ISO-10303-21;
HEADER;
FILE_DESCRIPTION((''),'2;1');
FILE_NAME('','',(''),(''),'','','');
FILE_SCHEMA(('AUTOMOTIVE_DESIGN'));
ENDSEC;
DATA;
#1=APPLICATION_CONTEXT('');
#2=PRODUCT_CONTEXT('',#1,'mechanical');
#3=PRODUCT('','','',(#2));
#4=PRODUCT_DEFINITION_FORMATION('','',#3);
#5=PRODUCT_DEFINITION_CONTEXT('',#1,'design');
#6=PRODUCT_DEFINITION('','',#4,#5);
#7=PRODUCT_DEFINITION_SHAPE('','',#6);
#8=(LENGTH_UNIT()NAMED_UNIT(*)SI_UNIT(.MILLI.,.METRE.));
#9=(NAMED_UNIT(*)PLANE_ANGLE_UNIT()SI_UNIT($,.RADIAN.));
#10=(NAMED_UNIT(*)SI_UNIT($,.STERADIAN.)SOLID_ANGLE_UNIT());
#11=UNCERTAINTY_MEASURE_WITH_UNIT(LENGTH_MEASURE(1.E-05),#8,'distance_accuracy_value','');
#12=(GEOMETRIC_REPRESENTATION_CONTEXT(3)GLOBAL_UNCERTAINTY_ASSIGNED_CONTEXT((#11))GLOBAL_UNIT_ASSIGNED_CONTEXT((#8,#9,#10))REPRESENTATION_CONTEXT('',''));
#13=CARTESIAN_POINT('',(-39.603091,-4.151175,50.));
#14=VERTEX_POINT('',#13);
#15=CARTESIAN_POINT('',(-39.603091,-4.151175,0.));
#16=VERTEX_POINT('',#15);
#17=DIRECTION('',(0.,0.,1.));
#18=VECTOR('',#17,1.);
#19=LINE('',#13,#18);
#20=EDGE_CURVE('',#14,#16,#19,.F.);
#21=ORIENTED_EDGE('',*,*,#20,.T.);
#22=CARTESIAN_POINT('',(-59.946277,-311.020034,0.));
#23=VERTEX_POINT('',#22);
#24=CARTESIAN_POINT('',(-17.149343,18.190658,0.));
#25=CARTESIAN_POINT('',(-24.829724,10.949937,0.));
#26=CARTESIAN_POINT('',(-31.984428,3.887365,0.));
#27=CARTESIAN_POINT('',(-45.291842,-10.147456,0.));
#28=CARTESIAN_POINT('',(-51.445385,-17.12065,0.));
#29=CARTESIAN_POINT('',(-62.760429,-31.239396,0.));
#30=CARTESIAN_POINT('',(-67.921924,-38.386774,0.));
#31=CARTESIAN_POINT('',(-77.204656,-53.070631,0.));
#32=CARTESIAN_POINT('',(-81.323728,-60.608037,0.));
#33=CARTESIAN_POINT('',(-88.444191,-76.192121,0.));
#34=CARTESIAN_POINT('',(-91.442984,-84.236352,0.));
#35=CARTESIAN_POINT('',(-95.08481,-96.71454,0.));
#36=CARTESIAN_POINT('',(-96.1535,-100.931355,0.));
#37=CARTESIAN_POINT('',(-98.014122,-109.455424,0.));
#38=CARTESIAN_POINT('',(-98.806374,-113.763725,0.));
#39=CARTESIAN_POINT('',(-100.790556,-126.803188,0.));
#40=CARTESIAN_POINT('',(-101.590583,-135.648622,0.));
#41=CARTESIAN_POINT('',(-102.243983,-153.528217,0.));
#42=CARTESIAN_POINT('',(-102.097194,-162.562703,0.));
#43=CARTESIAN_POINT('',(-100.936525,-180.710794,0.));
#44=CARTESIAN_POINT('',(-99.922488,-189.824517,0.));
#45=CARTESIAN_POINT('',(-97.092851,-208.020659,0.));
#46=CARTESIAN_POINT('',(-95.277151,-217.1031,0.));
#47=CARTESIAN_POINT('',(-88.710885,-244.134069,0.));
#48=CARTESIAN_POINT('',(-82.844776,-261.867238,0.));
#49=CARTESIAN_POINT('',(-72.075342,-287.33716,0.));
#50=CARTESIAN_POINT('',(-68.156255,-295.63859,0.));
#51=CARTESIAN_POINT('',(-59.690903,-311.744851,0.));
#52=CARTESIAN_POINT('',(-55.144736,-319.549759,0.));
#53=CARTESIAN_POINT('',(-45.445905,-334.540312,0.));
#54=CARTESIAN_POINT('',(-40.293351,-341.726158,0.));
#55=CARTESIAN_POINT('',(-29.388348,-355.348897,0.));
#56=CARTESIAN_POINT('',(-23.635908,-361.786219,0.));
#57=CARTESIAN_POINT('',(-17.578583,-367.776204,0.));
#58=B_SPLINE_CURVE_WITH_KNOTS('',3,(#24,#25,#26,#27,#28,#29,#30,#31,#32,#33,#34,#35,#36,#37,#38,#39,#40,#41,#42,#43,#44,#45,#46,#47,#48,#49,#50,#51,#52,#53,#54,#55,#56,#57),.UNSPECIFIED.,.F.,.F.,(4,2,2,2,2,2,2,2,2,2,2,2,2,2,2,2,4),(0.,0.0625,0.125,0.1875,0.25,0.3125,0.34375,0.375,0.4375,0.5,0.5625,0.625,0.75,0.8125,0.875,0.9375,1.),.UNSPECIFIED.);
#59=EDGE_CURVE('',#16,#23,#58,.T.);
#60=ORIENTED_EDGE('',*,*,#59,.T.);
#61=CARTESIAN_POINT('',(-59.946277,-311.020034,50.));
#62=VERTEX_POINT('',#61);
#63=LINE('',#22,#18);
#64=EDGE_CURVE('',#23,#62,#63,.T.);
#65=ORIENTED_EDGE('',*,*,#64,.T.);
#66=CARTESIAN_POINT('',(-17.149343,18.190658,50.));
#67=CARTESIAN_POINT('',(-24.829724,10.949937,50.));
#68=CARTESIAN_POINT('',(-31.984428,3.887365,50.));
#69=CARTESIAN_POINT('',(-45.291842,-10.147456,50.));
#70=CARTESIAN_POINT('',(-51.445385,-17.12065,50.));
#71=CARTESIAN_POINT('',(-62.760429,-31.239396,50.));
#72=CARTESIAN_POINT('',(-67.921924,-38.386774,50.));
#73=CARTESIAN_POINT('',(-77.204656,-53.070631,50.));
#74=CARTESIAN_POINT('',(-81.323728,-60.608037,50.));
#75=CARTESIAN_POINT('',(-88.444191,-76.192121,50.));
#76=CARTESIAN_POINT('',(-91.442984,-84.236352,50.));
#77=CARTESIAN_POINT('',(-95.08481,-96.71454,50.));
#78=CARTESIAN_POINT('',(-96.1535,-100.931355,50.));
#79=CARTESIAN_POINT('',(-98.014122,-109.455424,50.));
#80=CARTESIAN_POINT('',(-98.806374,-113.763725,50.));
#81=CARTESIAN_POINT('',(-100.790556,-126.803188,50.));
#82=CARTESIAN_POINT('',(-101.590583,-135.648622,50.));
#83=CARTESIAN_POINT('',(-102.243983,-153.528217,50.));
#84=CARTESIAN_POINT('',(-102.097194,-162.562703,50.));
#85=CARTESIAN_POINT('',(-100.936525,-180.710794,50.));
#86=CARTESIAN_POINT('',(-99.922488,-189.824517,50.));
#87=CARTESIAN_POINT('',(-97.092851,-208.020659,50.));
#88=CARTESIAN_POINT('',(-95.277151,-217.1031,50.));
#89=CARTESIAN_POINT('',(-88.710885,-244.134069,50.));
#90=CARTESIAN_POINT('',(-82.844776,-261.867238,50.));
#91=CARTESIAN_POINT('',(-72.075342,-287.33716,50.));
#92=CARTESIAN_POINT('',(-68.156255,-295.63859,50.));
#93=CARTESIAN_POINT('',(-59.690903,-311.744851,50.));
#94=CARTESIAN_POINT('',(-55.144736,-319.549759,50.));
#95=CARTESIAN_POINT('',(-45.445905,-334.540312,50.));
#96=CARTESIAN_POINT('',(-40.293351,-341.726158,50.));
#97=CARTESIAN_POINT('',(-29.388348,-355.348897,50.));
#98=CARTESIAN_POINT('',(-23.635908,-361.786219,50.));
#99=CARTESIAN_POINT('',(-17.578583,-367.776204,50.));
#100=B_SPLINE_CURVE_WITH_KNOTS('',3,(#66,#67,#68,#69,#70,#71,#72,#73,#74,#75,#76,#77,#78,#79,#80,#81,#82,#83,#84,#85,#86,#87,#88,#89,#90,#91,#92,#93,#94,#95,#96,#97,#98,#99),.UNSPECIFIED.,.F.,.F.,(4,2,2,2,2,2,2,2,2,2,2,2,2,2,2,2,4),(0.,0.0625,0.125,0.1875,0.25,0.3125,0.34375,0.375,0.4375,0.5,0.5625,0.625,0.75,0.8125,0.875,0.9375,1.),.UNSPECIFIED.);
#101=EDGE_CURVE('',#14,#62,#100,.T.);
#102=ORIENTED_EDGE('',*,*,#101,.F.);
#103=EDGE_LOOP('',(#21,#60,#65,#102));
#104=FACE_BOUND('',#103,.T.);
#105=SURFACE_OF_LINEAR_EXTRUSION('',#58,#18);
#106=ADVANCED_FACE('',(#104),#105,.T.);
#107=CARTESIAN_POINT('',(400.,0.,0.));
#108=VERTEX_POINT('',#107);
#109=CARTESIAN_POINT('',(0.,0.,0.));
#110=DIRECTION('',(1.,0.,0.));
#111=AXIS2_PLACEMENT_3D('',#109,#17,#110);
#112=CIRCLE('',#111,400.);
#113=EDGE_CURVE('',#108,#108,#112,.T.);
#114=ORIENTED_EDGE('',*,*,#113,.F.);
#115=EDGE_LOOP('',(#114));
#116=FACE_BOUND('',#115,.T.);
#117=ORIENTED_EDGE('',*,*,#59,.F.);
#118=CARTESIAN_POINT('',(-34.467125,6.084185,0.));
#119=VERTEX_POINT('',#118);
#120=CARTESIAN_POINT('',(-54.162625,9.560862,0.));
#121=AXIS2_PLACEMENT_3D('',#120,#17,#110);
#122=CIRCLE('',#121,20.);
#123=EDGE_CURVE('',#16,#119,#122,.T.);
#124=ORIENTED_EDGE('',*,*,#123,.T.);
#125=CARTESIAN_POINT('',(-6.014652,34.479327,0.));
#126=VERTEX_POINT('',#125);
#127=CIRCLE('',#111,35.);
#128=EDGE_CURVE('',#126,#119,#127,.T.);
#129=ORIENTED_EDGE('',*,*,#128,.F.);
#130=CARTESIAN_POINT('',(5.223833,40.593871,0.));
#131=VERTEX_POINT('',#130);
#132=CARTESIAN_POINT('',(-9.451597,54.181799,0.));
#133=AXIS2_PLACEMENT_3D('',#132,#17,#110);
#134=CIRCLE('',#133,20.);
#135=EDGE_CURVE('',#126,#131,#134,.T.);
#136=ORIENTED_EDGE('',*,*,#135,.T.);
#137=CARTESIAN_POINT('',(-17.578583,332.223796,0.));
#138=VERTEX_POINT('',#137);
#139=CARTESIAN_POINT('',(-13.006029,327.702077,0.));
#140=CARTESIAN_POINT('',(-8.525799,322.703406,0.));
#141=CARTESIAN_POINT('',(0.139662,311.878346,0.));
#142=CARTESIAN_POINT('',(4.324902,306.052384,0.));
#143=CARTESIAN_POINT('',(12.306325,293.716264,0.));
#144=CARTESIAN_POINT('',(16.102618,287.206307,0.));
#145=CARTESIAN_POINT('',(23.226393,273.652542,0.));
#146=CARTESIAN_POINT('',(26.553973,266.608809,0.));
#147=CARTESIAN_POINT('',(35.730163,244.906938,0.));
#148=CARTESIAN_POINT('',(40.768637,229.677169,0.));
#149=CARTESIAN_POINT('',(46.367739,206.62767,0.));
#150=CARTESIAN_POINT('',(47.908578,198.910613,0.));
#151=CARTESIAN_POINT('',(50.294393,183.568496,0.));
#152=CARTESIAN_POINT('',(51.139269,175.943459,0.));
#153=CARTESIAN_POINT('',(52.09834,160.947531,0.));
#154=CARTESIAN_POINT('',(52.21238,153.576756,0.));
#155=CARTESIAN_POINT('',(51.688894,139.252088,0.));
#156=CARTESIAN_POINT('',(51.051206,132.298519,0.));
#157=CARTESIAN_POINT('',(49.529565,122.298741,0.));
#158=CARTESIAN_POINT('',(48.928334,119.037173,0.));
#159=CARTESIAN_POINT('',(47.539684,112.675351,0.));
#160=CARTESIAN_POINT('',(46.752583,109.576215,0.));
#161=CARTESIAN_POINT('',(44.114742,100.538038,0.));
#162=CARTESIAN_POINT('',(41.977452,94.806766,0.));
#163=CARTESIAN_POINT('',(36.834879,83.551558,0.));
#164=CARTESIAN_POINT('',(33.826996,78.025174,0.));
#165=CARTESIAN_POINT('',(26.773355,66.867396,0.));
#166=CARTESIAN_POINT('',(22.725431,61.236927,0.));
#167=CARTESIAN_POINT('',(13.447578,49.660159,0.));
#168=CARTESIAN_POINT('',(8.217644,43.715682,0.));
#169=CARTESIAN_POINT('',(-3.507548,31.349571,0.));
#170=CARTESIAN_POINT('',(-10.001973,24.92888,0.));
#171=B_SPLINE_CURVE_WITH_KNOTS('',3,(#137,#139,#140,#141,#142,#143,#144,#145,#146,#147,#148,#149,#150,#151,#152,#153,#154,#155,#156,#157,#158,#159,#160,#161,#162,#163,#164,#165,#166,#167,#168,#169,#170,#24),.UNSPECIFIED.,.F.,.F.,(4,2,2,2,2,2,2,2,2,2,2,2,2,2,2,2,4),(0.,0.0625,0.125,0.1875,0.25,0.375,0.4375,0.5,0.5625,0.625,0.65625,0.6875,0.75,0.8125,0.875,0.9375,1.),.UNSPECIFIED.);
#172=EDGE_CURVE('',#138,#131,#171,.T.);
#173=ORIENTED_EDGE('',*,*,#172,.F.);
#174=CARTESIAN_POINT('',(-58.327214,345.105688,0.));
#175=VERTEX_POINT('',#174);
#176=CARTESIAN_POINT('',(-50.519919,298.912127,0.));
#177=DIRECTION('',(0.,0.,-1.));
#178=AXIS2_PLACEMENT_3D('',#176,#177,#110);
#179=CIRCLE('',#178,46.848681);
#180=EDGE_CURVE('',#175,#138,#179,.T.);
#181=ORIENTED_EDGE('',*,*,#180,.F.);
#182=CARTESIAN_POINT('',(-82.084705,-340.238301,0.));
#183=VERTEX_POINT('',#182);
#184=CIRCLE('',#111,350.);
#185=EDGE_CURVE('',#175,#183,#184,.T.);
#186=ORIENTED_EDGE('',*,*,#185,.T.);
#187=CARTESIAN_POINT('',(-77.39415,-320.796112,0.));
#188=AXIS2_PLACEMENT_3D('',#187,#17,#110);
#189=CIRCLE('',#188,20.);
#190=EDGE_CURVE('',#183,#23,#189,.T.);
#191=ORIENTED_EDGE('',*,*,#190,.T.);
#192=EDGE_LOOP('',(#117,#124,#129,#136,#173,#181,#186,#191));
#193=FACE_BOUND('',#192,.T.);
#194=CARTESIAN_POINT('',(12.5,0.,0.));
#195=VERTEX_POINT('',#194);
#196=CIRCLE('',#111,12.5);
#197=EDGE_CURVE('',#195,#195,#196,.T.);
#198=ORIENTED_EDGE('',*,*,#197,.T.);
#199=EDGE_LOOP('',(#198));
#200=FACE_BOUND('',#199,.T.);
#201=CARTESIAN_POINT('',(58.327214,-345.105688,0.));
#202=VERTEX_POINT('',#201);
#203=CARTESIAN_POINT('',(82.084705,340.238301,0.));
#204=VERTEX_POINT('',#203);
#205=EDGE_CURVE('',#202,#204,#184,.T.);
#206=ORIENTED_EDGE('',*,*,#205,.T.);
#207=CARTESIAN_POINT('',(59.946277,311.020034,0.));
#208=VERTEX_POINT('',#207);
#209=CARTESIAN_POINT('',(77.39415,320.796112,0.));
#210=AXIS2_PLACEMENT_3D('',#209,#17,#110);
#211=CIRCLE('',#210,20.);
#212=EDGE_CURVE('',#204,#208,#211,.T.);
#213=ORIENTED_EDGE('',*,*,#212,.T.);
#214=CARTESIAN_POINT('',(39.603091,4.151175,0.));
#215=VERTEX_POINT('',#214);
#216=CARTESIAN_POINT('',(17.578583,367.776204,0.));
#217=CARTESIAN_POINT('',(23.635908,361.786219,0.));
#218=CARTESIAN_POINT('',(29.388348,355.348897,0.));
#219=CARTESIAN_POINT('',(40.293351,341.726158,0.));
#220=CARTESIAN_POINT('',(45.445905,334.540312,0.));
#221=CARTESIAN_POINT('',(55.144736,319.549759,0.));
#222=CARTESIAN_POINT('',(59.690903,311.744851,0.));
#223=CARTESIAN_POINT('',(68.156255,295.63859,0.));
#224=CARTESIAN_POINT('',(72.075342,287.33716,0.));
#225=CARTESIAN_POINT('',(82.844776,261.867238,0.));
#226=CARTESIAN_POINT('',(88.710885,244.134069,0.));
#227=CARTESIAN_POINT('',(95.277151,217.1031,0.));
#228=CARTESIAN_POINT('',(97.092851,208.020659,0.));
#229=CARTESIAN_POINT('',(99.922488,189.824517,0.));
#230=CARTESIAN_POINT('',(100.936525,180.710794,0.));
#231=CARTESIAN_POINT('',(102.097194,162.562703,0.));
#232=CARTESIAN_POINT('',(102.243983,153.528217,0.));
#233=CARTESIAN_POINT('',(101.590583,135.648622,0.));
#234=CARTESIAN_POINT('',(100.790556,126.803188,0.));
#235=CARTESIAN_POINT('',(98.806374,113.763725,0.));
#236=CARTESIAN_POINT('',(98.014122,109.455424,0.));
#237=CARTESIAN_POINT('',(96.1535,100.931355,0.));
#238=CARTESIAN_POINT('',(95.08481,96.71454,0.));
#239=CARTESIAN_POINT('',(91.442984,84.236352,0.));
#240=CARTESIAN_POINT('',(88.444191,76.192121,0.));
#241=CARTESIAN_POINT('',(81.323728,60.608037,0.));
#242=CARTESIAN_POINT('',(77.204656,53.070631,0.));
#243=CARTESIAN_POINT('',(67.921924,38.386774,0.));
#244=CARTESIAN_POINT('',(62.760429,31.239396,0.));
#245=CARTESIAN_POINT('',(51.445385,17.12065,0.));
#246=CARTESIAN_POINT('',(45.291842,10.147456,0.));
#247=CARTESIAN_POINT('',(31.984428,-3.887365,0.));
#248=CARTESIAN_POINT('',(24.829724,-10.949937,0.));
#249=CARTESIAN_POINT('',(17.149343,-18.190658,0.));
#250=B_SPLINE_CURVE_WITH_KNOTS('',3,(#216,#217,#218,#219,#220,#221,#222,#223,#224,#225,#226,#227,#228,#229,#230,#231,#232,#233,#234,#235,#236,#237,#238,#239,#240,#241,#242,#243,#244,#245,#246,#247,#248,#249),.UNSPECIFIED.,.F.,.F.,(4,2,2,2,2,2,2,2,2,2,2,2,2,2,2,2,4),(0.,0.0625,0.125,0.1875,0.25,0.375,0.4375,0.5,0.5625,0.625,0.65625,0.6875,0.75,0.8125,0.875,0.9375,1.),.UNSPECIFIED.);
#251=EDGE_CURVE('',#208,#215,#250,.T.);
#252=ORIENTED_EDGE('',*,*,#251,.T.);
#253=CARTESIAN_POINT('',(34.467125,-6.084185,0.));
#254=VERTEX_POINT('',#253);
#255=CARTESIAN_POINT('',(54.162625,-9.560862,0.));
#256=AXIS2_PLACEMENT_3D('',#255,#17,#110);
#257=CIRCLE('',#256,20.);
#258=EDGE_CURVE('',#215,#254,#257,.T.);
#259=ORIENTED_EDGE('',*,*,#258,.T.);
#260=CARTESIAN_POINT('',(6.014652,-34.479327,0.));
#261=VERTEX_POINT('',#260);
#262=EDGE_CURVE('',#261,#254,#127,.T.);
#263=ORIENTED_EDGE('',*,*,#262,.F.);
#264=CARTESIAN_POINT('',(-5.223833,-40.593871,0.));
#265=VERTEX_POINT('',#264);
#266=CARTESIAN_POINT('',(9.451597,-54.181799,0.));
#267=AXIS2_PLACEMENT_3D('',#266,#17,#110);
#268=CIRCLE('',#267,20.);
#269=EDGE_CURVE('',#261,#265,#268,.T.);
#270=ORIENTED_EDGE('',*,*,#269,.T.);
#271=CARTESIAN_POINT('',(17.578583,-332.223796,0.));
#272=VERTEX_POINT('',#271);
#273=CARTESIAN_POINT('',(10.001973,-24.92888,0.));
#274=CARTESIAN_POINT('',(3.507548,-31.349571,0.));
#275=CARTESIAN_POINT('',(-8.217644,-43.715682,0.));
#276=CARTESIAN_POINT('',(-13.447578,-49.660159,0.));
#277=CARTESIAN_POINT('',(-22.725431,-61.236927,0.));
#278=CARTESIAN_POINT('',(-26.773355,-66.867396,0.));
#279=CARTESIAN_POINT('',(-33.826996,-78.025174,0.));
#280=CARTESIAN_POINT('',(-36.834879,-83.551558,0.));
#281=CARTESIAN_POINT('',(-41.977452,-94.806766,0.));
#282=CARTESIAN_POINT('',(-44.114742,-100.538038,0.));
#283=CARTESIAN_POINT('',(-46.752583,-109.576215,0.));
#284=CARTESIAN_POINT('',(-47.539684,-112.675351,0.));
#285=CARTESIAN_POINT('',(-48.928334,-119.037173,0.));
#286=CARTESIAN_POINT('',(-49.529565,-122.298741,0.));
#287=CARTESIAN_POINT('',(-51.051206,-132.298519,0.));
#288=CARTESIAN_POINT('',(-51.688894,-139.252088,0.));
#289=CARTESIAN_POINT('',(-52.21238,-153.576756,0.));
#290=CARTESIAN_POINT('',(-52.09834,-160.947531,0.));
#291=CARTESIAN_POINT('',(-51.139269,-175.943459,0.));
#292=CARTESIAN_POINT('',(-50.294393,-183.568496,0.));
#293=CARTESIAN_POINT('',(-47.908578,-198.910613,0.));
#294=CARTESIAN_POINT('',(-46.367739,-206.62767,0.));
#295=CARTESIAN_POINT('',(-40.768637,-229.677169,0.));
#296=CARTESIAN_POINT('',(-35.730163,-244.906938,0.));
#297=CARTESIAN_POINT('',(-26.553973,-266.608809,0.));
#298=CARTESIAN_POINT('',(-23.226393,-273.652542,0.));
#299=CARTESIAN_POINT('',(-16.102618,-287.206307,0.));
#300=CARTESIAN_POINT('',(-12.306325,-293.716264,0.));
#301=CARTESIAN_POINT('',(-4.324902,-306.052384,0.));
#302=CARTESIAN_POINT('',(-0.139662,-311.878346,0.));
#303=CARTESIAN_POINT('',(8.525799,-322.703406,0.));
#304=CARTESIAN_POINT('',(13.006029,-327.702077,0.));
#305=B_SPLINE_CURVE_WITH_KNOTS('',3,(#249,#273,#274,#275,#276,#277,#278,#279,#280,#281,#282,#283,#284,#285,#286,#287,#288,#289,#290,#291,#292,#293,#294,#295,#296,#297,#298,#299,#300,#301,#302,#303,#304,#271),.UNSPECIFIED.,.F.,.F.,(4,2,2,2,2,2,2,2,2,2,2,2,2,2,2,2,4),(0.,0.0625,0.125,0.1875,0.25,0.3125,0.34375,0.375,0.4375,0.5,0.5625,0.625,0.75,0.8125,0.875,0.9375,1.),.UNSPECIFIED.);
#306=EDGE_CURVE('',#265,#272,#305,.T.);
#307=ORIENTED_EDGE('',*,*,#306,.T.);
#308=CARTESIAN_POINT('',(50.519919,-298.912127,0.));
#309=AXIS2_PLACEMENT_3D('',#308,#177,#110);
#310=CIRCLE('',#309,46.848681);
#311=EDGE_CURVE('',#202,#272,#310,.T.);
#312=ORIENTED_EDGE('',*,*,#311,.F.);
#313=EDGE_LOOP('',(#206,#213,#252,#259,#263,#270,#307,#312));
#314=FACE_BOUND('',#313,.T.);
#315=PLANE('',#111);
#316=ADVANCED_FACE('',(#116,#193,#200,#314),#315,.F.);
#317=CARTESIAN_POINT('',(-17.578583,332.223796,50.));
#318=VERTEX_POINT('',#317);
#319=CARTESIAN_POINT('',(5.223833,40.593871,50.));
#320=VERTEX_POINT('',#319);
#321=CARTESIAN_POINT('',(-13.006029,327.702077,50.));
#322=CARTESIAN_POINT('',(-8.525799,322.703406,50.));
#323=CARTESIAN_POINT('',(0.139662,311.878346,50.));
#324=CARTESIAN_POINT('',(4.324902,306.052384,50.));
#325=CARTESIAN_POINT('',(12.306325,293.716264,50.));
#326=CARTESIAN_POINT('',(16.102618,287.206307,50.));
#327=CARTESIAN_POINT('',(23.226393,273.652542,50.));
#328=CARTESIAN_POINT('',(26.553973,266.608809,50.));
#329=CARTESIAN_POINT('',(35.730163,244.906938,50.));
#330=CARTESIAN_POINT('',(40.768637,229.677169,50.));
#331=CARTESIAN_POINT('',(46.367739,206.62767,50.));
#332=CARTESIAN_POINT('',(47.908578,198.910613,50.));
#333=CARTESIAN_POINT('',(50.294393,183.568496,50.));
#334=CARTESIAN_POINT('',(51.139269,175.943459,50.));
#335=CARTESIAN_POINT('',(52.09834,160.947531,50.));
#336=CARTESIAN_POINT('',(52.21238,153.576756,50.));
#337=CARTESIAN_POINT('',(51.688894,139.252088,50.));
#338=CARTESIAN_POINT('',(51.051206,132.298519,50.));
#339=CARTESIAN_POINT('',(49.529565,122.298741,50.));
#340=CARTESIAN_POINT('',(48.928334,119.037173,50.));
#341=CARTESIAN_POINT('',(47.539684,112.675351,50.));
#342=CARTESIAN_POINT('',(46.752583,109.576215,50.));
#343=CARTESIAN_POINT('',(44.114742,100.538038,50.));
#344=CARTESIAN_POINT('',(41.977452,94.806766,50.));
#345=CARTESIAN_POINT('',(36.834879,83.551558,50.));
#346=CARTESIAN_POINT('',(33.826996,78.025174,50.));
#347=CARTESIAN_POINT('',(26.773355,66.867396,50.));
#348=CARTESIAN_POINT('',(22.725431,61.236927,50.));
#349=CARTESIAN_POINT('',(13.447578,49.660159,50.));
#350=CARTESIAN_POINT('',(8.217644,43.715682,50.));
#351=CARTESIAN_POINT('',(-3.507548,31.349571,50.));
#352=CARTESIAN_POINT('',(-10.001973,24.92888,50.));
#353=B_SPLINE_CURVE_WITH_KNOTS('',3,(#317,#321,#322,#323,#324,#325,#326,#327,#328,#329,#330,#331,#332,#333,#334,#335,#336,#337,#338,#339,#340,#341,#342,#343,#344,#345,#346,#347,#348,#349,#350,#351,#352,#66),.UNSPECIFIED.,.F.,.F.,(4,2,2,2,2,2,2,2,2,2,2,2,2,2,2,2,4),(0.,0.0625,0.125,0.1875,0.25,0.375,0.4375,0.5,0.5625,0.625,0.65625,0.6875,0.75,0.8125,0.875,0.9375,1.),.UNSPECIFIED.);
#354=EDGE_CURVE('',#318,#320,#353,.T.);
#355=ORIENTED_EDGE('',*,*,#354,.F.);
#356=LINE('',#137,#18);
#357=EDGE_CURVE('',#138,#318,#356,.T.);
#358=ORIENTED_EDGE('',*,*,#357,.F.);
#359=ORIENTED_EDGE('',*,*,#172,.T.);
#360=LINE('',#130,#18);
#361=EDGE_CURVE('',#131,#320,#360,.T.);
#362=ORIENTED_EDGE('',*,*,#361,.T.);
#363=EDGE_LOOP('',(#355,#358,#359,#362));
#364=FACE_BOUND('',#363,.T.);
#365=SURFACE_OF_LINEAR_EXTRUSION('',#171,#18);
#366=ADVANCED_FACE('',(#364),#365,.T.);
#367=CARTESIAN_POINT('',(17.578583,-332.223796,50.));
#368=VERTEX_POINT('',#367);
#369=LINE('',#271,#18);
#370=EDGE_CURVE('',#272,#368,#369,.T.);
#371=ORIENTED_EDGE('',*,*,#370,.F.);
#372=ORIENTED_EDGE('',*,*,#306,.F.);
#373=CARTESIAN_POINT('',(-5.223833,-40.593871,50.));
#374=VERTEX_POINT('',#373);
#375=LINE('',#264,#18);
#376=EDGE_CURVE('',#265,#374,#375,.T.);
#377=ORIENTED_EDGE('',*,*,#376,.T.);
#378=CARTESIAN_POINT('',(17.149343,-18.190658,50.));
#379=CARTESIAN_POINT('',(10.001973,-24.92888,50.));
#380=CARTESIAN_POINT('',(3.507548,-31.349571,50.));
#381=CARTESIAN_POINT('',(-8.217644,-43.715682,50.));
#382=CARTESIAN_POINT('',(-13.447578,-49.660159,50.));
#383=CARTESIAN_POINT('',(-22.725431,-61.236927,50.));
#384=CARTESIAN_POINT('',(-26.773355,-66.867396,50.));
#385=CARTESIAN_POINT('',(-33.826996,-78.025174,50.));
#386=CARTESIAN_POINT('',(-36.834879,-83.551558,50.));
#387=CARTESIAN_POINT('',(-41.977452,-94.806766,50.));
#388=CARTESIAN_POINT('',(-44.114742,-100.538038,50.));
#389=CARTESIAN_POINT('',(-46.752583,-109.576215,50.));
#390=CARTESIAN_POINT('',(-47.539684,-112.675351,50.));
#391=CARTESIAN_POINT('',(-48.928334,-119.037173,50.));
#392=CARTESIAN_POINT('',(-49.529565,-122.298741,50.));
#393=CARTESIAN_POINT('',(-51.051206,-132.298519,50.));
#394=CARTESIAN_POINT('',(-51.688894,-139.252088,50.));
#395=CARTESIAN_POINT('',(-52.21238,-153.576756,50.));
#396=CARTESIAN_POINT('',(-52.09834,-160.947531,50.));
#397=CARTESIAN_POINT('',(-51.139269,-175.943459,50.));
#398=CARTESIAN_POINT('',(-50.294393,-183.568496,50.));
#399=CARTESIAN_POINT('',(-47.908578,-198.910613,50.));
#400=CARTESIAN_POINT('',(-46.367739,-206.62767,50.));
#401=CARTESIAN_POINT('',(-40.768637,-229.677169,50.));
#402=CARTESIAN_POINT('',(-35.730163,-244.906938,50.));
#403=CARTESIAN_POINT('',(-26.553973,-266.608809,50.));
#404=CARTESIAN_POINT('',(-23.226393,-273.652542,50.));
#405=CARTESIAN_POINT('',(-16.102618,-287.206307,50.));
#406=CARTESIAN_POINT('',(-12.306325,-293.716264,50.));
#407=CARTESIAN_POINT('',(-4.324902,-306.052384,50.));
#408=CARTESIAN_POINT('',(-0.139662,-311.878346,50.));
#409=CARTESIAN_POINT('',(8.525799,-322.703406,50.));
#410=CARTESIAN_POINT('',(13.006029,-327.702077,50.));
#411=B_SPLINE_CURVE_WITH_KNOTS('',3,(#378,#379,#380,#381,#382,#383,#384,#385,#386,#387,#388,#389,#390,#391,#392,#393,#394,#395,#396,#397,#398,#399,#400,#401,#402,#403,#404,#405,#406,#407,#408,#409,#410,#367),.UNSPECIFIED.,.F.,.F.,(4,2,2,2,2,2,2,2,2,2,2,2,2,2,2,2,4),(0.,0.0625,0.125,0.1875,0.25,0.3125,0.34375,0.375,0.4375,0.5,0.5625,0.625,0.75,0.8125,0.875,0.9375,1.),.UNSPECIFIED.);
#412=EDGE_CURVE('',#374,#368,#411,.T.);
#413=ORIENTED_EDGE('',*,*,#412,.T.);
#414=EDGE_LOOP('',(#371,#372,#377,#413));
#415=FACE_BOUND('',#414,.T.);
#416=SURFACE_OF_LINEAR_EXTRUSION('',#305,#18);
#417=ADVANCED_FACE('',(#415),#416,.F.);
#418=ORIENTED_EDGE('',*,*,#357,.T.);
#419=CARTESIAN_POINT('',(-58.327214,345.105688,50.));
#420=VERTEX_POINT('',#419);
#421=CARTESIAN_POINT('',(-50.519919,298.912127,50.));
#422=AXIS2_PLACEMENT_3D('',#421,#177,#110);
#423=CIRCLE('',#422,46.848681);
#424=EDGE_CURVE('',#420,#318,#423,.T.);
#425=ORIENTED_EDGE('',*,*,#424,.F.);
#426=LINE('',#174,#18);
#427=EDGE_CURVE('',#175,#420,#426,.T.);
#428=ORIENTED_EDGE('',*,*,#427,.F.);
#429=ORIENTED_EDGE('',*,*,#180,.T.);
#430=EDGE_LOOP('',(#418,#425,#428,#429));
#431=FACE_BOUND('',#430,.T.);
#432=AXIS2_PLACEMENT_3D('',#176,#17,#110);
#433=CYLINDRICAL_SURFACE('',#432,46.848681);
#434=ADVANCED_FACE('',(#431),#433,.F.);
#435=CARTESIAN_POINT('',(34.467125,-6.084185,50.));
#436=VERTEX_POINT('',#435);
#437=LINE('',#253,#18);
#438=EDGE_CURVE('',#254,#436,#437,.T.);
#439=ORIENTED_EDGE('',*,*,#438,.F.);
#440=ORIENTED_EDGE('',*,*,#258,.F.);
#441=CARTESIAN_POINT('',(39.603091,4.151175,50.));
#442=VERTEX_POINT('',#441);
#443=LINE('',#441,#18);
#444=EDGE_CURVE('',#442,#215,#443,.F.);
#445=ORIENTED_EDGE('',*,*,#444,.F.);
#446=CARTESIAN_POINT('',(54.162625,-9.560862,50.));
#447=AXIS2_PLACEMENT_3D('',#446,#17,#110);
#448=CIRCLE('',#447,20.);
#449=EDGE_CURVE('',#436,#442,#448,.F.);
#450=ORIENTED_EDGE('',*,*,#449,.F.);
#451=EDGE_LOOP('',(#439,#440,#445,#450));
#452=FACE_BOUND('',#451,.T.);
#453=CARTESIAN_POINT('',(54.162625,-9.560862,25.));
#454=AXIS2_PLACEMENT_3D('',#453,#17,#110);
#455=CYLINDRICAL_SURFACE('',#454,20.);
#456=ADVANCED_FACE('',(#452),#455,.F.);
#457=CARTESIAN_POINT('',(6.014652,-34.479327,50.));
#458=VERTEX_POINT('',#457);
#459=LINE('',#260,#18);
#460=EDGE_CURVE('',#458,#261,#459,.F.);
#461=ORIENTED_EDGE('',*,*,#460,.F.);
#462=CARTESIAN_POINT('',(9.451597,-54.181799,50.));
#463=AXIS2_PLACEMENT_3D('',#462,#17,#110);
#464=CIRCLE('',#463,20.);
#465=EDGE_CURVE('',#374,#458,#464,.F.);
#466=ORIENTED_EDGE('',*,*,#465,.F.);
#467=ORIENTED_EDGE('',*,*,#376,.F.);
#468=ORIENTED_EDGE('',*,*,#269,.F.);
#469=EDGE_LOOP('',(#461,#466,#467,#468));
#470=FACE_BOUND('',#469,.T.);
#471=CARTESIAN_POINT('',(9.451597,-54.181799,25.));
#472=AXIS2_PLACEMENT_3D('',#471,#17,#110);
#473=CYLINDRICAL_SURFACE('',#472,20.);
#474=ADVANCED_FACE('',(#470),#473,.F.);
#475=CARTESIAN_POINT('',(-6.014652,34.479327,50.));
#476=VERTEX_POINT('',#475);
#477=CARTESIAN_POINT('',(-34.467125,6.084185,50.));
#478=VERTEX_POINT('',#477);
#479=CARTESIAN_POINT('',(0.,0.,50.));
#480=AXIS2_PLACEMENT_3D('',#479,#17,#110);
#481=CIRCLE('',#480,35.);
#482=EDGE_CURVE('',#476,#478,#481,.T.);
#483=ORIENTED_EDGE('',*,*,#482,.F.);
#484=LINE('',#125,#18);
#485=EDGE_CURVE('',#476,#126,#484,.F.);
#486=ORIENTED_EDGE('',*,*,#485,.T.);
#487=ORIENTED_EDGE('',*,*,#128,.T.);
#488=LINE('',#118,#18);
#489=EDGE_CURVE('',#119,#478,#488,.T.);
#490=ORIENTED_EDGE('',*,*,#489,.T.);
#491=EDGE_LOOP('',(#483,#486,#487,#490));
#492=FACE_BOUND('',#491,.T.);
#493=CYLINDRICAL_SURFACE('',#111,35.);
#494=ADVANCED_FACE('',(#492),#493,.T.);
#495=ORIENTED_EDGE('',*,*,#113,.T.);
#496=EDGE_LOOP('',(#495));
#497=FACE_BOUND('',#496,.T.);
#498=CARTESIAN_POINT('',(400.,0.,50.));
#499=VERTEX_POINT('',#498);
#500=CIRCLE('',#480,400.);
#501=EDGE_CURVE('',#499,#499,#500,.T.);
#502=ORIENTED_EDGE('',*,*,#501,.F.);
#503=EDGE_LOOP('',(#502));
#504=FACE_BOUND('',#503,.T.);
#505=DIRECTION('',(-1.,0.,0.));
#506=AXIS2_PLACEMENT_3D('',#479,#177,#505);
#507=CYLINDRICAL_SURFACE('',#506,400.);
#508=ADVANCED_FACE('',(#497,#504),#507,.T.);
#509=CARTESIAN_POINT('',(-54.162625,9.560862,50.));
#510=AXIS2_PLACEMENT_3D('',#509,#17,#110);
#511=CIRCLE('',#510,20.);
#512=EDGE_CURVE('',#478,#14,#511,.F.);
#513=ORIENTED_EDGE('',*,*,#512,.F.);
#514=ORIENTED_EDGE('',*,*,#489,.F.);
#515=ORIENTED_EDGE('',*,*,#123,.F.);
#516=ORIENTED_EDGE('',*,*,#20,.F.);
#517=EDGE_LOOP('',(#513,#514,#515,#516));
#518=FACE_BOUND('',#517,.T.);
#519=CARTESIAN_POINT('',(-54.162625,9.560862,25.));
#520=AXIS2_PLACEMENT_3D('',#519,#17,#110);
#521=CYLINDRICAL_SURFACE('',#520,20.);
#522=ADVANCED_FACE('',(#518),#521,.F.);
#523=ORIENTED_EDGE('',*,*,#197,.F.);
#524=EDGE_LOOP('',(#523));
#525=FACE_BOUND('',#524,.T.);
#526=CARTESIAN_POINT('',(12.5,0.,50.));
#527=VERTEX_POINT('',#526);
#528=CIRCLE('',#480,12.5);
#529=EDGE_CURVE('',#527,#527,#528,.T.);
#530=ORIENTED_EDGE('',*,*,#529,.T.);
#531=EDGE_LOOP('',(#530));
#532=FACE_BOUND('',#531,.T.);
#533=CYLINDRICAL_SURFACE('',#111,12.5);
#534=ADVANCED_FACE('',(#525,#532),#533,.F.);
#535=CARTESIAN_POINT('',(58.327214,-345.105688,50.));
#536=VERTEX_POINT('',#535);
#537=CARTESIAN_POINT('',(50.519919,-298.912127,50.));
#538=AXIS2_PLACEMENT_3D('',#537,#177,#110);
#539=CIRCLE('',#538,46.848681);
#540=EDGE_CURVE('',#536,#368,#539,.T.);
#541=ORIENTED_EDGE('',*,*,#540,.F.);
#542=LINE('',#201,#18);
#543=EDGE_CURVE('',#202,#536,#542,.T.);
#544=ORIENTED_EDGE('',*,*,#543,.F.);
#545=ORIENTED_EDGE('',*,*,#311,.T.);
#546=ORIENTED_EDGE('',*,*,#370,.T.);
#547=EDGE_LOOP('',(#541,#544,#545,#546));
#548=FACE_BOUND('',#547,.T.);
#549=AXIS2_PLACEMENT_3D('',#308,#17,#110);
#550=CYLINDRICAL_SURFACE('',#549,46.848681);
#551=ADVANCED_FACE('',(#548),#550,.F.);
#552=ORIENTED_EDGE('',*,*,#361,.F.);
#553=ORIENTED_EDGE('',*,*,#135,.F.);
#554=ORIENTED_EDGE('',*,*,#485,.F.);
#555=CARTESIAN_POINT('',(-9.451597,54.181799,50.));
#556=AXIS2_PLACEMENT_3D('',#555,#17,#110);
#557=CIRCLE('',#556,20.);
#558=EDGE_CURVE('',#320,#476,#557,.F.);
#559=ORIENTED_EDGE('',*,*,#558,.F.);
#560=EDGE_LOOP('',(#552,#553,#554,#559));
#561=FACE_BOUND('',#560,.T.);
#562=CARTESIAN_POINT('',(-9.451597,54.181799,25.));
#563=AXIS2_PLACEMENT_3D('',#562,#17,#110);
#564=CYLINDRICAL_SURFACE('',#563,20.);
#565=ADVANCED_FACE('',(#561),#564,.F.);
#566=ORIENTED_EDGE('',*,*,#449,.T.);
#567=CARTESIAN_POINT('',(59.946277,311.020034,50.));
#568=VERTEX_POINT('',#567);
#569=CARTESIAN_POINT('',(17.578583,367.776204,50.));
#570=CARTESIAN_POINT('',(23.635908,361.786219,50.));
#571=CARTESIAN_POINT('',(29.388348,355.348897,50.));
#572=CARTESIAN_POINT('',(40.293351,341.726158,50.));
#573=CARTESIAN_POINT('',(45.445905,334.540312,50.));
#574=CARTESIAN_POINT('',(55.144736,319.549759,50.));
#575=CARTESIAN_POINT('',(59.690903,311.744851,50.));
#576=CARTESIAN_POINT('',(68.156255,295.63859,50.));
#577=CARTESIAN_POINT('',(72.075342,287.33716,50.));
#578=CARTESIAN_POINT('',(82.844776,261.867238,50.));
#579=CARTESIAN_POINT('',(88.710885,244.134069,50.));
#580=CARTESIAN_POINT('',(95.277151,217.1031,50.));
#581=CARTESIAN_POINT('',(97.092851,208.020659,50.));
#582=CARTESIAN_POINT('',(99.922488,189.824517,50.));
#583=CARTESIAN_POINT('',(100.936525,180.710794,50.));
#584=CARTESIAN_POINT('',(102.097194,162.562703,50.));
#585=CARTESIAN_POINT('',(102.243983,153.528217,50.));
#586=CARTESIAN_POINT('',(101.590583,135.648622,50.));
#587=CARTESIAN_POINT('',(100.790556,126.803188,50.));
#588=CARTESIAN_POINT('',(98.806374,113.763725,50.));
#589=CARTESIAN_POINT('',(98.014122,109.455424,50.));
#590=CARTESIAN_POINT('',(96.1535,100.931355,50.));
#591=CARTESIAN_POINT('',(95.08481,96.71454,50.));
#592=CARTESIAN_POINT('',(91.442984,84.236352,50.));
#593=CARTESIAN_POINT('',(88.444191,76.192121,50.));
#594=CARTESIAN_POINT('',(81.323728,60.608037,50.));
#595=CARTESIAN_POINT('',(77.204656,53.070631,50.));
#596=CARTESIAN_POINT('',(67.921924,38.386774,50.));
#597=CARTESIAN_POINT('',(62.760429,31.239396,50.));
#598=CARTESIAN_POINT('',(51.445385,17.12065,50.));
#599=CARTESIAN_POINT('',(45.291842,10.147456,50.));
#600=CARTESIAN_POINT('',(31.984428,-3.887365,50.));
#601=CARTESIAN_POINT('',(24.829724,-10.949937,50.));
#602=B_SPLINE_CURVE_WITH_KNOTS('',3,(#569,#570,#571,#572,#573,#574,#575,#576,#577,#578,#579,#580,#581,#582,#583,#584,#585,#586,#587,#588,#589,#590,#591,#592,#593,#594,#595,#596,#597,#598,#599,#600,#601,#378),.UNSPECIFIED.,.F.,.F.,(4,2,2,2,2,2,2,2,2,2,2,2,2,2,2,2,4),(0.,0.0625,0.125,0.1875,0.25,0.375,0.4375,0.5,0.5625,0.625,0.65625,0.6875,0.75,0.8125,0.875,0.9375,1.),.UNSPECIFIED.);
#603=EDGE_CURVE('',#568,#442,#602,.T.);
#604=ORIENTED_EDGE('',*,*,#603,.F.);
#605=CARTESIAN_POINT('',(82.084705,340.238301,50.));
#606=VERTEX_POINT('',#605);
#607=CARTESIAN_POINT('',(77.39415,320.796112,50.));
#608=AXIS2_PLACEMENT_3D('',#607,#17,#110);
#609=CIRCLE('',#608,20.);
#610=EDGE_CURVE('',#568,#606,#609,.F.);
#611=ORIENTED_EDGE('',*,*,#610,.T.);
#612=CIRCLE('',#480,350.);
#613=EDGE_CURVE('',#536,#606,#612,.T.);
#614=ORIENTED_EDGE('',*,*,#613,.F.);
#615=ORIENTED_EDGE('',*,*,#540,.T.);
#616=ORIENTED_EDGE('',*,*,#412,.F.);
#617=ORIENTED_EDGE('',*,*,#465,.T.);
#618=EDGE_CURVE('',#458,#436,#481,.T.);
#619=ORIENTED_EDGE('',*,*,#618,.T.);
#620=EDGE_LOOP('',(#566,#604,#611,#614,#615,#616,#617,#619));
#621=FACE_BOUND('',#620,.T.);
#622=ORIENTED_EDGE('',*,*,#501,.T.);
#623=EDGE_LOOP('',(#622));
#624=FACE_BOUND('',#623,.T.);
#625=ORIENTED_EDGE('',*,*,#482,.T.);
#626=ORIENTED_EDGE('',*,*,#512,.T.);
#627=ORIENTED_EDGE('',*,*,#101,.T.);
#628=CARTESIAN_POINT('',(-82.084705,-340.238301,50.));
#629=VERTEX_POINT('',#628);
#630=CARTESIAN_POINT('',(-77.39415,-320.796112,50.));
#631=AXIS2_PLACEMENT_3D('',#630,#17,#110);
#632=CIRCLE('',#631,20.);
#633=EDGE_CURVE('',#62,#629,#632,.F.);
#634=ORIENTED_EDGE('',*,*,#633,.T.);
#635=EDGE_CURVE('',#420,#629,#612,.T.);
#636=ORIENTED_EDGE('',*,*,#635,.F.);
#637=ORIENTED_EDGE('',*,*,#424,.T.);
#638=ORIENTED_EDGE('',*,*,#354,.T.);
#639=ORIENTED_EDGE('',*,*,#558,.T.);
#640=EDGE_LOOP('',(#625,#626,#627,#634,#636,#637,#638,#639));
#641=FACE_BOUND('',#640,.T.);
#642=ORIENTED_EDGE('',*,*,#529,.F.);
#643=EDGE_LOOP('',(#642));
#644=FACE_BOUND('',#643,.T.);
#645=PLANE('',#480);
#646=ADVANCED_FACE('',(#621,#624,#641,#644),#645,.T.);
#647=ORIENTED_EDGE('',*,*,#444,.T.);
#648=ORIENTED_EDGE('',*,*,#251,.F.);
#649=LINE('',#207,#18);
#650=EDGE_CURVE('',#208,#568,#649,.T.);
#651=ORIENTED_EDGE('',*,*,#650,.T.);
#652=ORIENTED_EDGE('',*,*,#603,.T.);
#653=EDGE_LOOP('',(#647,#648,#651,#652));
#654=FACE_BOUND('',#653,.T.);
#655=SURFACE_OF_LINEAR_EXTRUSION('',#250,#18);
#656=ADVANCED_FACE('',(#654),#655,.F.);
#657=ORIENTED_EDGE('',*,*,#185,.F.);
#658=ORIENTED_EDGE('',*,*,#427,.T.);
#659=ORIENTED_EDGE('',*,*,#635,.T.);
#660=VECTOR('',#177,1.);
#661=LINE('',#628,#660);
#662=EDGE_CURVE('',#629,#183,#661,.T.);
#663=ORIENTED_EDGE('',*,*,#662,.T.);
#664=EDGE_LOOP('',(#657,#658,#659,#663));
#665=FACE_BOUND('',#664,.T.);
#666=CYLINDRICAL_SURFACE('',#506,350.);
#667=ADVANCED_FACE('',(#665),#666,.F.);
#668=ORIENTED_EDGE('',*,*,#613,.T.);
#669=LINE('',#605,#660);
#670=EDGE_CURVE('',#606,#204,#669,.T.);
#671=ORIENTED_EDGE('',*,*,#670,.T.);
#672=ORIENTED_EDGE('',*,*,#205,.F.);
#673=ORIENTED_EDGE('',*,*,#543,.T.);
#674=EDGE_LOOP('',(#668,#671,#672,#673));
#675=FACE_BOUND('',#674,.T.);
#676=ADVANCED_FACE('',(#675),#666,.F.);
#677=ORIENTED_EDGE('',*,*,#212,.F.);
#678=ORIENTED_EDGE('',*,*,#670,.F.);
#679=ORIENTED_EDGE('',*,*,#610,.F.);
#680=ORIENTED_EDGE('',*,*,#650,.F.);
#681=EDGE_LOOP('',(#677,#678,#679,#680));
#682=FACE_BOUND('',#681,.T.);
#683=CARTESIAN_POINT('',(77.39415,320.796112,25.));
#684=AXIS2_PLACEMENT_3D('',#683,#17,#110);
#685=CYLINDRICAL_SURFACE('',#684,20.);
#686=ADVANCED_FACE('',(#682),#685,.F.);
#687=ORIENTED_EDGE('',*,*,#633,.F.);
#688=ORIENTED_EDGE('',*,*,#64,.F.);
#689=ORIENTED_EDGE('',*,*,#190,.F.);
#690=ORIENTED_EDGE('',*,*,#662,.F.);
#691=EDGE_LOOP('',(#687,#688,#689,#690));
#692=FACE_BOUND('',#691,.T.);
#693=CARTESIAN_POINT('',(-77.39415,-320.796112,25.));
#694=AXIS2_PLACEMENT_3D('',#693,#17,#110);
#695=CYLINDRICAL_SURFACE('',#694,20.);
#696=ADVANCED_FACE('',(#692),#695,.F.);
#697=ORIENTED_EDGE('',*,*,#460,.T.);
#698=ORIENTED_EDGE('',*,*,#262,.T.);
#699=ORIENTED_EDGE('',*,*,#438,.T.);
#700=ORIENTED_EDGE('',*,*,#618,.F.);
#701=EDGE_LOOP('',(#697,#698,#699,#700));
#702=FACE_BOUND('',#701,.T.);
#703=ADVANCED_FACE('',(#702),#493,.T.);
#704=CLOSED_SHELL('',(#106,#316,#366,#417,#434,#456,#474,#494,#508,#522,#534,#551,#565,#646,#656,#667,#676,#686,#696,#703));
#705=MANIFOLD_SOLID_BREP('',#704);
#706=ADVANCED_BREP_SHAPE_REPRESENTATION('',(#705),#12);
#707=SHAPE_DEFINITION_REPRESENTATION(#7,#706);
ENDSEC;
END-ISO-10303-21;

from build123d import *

# Parameters (mm, degrees)
ESQUISSE1_R                  = 400
ESQUISSE1_R_2                = 350
BOSS_EXTRU_1_DEPTH           = 50
EXTRU_MINCE1_START           = -50
EXTRU_MINCE1_DEPTH           = 50
BOSS_EXTRU_2_START           = -50
BOSS_EXTRU_2_DEPTH           = 50
ENL_V_MAT_EXTRU_1_DEPTH      = 568.89083473
ENL_V_MAT_EXTRU_1_DEPTH_BACK = 568.89083473
ESQUISSE4_R                  = 12.5
ESQUISSE5_R                  = 35
ESQUISSE5_R_2                = 12.5
BOSS_EXTRU_3_DEPTH           = 50
CONG_2_R                     = 20


# Read off the part's stored shape, not the designer's step: Extru.-Mince1
with BuildPart() as part:
    # Esquisse1 → Boss.-Extru.1 (new body)
    with BuildSketch(Plane.XY):
        Circle(ESQUISSE1_R)
        Circle(ESQUISSE1_R_2, mode=Mode.SUBTRACT)
    extrude(amount=BOSS_EXTRU_1_DEPTH)

    # Extru.-Mince1 outline → Extru.-Mince1 (add)
    with BuildSketch(Plane.XY.offset(50).offset(EXTRU_MINCE1_START)):
        with BuildLine():
            add(Edge.make_bspline(
                [(-17.578582702, 332.223795956), (-13.006029397, 327.702076571), (-8.525799104, 322.703406145), (0.139661855, 311.878345733), (4.324902329, 306.052383763), (12.306325082, 293.716264205), (16.102617705, 287.206307092), (23.226392886, 273.652542218), (26.553972592, 266.608809401), (35.730163441, 244.906938456), (40.768636512, 229.677168598), (46.367738516, 206.627670241), (47.908578076, 198.910612565), (50.294392784, 183.568496034), (51.139268661, 175.94345939), (52.098340216, 160.947531132), (52.21238025, 153.576755976), (51.68889352, 139.252087771), (51.051205988, 132.298518999), (49.529565248, 122.298741474), (48.928334221, 119.037172715), (47.539683848, 112.675350651), (46.752582578, 109.576215008), (44.114742474, 100.538037841), (41.977452484, 94.806766085), (36.834878855, 83.551557811), (33.826996348, 78.025173728), (26.773354915, 66.867395642), (22.725430524, 61.236927426), (13.447578047, 49.660158587), (8.217643624, 43.715682454), (-3.507548172, 31.349570896), (-10.001973073, 24.928879975), (-24.829724062, 10.949936653), (-31.984427814, 3.887364914), (-45.291841947, -10.147456059), (-51.445384798, -17.120649798), (-62.760428782, -31.239396452), (-67.921923577, -38.386773856), (-77.204655719, -53.070631299), (-81.323727601, -60.608037124), (-88.444191242, -76.192121488), (-91.442984134, -84.236352462), (-95.084809692, -96.714540413), (-96.153499672, -100.931355257), (-98.014122409, -109.455423671), (-98.80637413, -113.763724761), (-100.790556161, -126.803188246), (-101.590583179, -135.648622106), (-102.243982659, -153.528217171), (-102.097194354, -162.562702654), (-100.936524717, -180.710794438), (-99.922487739, -189.824517197), (-97.092850599, -208.020658997), (-95.277151165, -217.103100248), (-88.710884536, -244.134069098), (-82.844776318, -261.867237944), (-72.075342178, -287.337160454), (-68.156254712, -295.638589688), (-59.690902904, -311.744851476), (-55.14473571, -319.549758973), (-45.517052393, -334.430345572), (-40.444476295, -341.515238116), (-35.080643578, -348.237488571)],
                knots=[0, 0, 0, 0, 0.0625, 0.0625, 0.125, 0.125, 0.1875, 0.1875, 0.25, 0.25, 0.375, 0.375, 0.4375, 0.4375, 0.5, 0.5, 0.5625, 0.5625, 0.625, 0.625, 0.65625, 0.65625, 0.6875, 0.6875, 0.75, 0.75, 0.8125, 0.8125, 0.875, 0.875, 0.9375, 0.9375, 1, 1, 1.06716091, 1.06716091, 1.134321821, 1.134321821, 1.201482731, 1.201482731, 1.268643642, 1.268643642, 1.335804552, 1.335804552, 1.369385007, 1.369385007, 1.402965463, 1.402965463, 1.470126373, 1.470126373, 1.537287283, 1.537287283, 1.604448194, 1.604448194, 1.671609104, 1.671609104, 1.805930925, 1.805930925, 1.873091836, 1.873091836, 1.940252746, 1.940252746, 2.00642831, 2.00642831, 2.00642831, 2.00642831], degree=3))
            ThreePointArc((-35.080643578, -348.237488571), (-17.562445732, -349.559094432), (0, -350))
            Line((0, -350), (17.578582702, -332.223795956))
            add(Edge.make_bspline(
                [(17.578582702, -332.223795956), (13.006029397, -327.702076571), (8.525799104, -322.703406145), (-0.139661855, -311.878345733), (-4.324902329, -306.052383763), (-12.306325082, -293.716264205), (-16.102617705, -287.206307092), (-23.226392886, -273.652542218), (-26.553972592, -266.608809401), (-35.730163441, -244.906938456), (-40.768636512, -229.677168598), (-46.367738516, -206.627670241), (-47.908578076, -198.910612565), (-50.294392784, -183.568496034), (-51.139268661, -175.94345939), (-52.098340216, -160.947531132), (-52.21238025, -153.576755976), (-51.68889352, -139.252087771), (-51.051205988, -132.298518999), (-49.529565248, -122.298741474), (-48.928334221, -119.037172715), (-47.539683848, -112.675350651), (-46.752582578, -109.576215008), (-44.114742474, -100.538037841), (-41.977452484, -94.806766085), (-36.834878855, -83.551557811), (-33.826996348, -78.025173728), (-26.773354915, -66.867395642), (-22.725430524, -61.236927426), (-13.447578047, -49.660158587), (-8.217643624, -43.715682454), (3.507548172, -31.349570896), (10.001973073, -24.928879975), (24.829724062, -10.949936653), (31.984427814, -3.887364914), (45.291841947, 10.147456059), (51.445384798, 17.120649798), (62.760428782, 31.239396452), (67.921923577, 38.386773856), (77.204655719, 53.070631299), (81.323727601, 60.608037124), (88.444191242, 76.192121488), (91.442984134, 84.236352462), (95.084809692, 96.714540413), (96.153499672, 100.931355257), (98.014122409, 109.455423671), (98.80637413, 113.763724761), (100.790556161, 126.803188246), (101.590583179, 135.648622106), (102.243982659, 153.528217171), (102.097194354, 162.562702654), (100.936524717, 180.710794438), (99.922487739, 189.824517197), (97.092850599, 208.020658997), (95.277151165, 217.103100248), (88.710884536, 244.134069098), (82.844776318, 261.867237944), (72.075342178, 287.337160454), (68.156254712, 295.638589688), (59.690902904, 311.744851476), (55.14473571, 319.549758973), (45.517052393, 334.430345572), (40.444476295, 341.515238116), (35.080643578, 348.237488571)],
                knots=[0, 0, 0, 0, 0.0625, 0.0625, 0.125, 0.125, 0.1875, 0.1875, 0.25, 0.25, 0.375, 0.375, 0.4375, 0.4375, 0.5, 0.5, 0.5625, 0.5625, 0.625, 0.625, 0.65625, 0.65625, 0.6875, 0.6875, 0.75, 0.75, 0.8125, 0.8125, 0.875, 0.875, 0.9375, 0.9375, 1, 1, 1.06716091, 1.06716091, 1.134321821, 1.134321821, 1.201482731, 1.201482731, 1.268643642, 1.268643642, 1.335804552, 1.335804552, 1.369385007, 1.369385007, 1.402965463, 1.402965463, 1.470126373, 1.470126373, 1.537287283, 1.537287283, 1.604448194, 1.604448194, 1.671609104, 1.671609104, 1.805930925, 1.805930925, 1.873091836, 1.873091836, 1.940252746, 1.940252746, 2.00642831, 2.00642831, 2.00642831, 2.00642831], degree=3))
            ThreePointArc((35.080643578, 348.237488571), (17.562445732, 349.559094432), (0, 350))
            Line((0, 350), (-17.578582702, 332.223795956))
        make_face()
    extrude(amount=EXTRU_MINCE1_DEPTH)

    # Esquisse3 → Boss.-Extru.2 (add)
    with BuildSketch(Plane.XY.offset(50).offset(BOSS_EXTRU_2_START)):
        with BuildLine():
            Line((-17.578582702, 332.223795956), (0, 350))
            ThreePointArc((0, 350), (-29.266098764, 348.774275805), (-58.327213726, 345.105688361))
            ThreePointArc((-58.327213726, 345.105688361), (-36.398453128, 343.581838752), (-17.578582702, 332.223795956))
        make_face()
        with BuildLine():
            Line((17.578582702, -332.223795956), (0, -350))
            ThreePointArc((0, -350), (29.266098764, -348.774275805), (58.327213726, -345.105688361))
            ThreePointArc((58.327213726, -345.105688361), (36.398453128, -343.581838752), (17.578582702, -332.223795956))
        make_face()
    extrude(amount=BOSS_EXTRU_2_DEPTH)

    # Esquisse4 → Enlèv. mat.-Extru.1 (cut, two sides: drawn at the far end of the back side and taken through both)
    with BuildSketch(Plane.XY.offset(50).offset(-ENL_V_MAT_EXTRU_1_DEPTH_BACK)):
        Circle(ESQUISSE4_R)
    extrude(amount=ENL_V_MAT_EXTRU_1_DEPTH + ENL_V_MAT_EXTRU_1_DEPTH_BACK, mode=Mode.SUBTRACT)

    # Esquisse5 → Boss.-Extru.3 (add)
    with BuildSketch(Plane.XY.offset(50)):
        Circle(ESQUISSE5_R)
        Circle(ESQUISSE5_R_2, mode=Mode.SUBTRACT)
    extrude(amount=-BOSS_EXTRU_3_DEPTH)

    # Congé2
    cong_2_edges = [part.edges().sort_by_distance(p)[0] for p in [
        (35.080643578, 348.237488571, 25),
        (-35.080643578, -348.237488571, 25),
        (34.993639035, -0.667253389, 25),
        (0.068739934, -34.999932497, 25),
        (-0.068739934, 34.999932497, 25),
        (-34.993639035, 0.667253389, 25),
    ]]
    fillet(cong_2_edges, radius=CONG_2_R)


solid = part.part
